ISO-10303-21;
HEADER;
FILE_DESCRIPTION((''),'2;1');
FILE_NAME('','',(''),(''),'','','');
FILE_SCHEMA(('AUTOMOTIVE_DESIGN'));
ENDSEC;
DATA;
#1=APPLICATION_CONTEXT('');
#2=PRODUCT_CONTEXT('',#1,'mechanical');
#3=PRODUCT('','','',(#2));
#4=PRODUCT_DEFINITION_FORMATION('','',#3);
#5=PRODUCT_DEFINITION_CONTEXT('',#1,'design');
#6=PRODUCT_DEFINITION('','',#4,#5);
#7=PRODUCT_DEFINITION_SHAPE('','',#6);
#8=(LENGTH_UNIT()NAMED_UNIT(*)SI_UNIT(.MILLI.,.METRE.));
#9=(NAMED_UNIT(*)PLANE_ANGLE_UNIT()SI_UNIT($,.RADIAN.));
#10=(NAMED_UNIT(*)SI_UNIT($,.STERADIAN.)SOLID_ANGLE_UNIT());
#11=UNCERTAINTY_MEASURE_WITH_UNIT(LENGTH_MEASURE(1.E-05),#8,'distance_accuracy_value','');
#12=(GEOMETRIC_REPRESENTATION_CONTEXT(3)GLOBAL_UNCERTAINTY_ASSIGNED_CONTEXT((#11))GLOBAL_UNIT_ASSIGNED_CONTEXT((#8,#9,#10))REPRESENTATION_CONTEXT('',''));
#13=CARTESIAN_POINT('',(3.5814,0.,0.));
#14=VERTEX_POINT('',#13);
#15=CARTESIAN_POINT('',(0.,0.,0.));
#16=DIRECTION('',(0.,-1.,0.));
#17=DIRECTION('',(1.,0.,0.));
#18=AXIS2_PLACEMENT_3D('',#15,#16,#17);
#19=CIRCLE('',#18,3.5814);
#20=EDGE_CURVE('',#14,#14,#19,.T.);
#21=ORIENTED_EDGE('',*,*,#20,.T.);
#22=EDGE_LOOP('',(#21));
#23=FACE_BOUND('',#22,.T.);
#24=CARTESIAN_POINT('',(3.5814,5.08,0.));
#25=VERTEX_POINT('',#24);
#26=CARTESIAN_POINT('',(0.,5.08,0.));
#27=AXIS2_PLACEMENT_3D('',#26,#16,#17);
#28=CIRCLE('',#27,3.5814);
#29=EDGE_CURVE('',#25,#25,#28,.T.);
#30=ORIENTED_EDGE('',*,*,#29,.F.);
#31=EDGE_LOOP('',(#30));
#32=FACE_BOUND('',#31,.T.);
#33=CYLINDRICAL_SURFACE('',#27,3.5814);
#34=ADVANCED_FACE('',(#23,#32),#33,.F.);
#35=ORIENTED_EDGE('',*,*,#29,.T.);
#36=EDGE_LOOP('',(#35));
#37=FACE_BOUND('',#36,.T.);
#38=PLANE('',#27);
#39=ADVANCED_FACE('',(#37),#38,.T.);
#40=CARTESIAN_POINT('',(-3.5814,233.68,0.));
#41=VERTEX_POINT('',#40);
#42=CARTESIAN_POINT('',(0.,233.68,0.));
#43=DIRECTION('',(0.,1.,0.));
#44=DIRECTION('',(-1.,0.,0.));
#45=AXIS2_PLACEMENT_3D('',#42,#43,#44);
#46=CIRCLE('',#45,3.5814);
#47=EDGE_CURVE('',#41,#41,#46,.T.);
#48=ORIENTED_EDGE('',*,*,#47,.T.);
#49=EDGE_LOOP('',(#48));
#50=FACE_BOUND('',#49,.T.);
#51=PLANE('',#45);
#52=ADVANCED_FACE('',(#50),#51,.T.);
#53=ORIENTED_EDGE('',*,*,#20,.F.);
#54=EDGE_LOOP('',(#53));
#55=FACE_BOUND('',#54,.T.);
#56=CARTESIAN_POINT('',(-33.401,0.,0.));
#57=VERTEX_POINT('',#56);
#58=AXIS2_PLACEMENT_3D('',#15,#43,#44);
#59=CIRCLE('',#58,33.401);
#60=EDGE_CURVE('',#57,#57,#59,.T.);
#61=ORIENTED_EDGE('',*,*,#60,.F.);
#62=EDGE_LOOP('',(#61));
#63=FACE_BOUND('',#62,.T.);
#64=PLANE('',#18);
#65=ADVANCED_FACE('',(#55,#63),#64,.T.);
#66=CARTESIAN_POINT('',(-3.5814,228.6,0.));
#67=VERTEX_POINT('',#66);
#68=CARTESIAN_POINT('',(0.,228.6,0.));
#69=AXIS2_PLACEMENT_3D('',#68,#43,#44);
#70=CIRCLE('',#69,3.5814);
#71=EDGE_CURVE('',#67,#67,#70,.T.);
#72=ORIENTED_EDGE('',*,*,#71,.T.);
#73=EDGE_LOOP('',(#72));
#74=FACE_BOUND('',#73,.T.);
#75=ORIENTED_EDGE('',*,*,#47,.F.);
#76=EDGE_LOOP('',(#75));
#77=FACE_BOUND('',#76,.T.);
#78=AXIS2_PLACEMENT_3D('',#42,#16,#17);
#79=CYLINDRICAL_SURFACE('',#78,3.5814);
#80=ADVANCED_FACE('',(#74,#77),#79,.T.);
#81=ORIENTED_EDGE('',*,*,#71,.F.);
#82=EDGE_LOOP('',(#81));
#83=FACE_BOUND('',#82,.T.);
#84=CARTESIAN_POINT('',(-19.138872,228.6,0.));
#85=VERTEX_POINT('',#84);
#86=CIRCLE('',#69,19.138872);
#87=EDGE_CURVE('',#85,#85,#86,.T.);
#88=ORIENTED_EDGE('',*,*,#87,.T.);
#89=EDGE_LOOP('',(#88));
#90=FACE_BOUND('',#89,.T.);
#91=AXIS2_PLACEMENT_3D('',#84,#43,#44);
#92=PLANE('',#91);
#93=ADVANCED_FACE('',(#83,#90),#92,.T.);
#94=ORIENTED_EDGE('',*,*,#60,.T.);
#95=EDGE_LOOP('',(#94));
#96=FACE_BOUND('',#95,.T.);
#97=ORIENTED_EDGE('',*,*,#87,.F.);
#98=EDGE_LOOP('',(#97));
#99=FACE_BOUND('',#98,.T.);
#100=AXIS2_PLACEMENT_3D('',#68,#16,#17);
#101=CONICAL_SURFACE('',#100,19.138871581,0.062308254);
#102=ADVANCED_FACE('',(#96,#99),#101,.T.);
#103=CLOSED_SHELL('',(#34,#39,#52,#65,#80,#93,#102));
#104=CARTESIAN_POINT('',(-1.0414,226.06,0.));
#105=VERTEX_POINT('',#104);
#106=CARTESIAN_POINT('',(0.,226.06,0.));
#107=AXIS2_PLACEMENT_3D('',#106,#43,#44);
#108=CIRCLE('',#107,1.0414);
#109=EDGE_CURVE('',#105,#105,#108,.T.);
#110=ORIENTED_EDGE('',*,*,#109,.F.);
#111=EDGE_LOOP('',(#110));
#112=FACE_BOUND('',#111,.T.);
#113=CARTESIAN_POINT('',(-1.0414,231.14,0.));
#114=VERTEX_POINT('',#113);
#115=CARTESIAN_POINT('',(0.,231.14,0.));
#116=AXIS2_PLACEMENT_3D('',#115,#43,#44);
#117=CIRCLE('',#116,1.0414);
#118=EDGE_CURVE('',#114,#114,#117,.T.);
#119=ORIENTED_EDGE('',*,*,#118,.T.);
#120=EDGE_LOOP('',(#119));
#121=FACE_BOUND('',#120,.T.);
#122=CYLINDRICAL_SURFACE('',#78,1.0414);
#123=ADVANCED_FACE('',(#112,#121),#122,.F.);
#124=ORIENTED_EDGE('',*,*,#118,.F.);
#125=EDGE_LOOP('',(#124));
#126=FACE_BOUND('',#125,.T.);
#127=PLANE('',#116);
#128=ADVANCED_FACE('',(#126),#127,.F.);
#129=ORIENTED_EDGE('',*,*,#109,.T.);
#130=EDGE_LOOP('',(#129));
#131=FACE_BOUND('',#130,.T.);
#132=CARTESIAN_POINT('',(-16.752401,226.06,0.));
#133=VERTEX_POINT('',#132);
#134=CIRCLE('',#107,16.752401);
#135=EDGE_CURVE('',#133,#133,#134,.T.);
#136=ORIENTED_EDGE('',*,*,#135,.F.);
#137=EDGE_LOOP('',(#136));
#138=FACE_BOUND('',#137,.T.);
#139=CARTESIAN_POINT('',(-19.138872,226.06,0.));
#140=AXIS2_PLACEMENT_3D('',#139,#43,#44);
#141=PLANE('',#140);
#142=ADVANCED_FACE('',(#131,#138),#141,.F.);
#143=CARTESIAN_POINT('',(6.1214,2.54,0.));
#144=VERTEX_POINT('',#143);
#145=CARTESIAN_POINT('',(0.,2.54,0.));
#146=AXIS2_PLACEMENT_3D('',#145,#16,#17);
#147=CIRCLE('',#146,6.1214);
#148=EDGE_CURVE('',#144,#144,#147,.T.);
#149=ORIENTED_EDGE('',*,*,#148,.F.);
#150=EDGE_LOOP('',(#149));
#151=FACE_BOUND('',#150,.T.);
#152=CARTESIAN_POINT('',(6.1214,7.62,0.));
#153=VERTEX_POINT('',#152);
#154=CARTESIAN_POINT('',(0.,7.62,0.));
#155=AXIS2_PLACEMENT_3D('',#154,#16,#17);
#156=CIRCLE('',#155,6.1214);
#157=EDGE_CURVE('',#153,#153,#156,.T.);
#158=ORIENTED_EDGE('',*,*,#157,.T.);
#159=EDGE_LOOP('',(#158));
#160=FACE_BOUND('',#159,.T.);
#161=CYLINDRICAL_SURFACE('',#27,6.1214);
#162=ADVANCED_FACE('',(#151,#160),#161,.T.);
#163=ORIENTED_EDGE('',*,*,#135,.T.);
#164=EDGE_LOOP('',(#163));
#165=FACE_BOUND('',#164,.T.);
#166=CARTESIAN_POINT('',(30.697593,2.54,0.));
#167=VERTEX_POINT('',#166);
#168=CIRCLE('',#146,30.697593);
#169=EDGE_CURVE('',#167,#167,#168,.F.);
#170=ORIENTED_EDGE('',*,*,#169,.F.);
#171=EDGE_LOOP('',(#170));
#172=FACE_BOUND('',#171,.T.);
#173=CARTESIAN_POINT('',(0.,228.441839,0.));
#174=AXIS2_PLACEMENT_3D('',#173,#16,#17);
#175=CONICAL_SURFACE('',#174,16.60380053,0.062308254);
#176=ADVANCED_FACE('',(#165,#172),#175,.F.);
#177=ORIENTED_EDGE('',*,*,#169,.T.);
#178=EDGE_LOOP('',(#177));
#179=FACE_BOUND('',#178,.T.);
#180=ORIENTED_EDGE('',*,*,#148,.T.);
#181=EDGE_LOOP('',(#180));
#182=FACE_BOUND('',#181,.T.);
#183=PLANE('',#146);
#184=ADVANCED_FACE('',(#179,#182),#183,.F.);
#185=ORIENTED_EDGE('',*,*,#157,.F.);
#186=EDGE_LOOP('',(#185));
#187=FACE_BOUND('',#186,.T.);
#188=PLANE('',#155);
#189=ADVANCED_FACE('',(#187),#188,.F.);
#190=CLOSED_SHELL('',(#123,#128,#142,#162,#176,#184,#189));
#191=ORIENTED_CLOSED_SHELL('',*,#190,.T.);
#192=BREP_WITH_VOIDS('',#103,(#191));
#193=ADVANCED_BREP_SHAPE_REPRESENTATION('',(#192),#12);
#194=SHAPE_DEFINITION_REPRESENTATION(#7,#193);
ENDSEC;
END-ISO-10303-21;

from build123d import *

# Parameters (mm, degrees)
SKETCH2_R           = 3.5814
BOSS_EXTRUDE1_DEPTH = 5.08
SKETCH3_R           = 3.5814
CUT_EXTRUDE1_DEPTH  = 5.08


# Read off the part's stored shape, not the designer's step: Shell3
with BuildPart() as part:
    # Sketch1 → Revolve1 (revolve)
    with BuildSketch(Plane.XY):
        Polygon((0, 0), (-33.401, 0), (-19.138871581, 228.6), (0, 228.6), align=None)
    revolve(axis=Axis((0, 228.6, 0), (0, -1, 0)))

    # Sketch2 → Boss-Extrude1 (add)
    with BuildSketch(Plane(origin=(0, 228.6, 0), x_dir=(1, 0, 0), z_dir=(0, 1, 0))):
        with Locations(Location((0, 0, 0), (0, 0, 180))):
            Circle(SKETCH2_R)
    extrude(amount=BOSS_EXTRUDE1_DEPTH)

    # Sketch3 → Cut-Extrude1 (cut)
    with BuildSketch(Plane.XZ):
        with Locations(Location((0, 0, 0), (0, 0, 180))):
            Circle(SKETCH3_R)
    extrude(amount=-CUT_EXTRUDE1_DEPTH, mode=Mode.SUBTRACT)

    # Shell3 outline → Shell3 (revolve, cut)
    with BuildSketch(Plane.XY):
        Polygon((6.1214, 7.62), (6.1214, 2.54), (30.697593373, 2.54), (16.752401141, 226.06), (1.0414, 226.06), (1.0414, 231.14), (0, 231.14), (0, 7.62), align=None)
    revolve(axis=Axis((0, 0, 0), (0, 1, 0)), mode=Mode.SUBTRACT)


solid = part.part
